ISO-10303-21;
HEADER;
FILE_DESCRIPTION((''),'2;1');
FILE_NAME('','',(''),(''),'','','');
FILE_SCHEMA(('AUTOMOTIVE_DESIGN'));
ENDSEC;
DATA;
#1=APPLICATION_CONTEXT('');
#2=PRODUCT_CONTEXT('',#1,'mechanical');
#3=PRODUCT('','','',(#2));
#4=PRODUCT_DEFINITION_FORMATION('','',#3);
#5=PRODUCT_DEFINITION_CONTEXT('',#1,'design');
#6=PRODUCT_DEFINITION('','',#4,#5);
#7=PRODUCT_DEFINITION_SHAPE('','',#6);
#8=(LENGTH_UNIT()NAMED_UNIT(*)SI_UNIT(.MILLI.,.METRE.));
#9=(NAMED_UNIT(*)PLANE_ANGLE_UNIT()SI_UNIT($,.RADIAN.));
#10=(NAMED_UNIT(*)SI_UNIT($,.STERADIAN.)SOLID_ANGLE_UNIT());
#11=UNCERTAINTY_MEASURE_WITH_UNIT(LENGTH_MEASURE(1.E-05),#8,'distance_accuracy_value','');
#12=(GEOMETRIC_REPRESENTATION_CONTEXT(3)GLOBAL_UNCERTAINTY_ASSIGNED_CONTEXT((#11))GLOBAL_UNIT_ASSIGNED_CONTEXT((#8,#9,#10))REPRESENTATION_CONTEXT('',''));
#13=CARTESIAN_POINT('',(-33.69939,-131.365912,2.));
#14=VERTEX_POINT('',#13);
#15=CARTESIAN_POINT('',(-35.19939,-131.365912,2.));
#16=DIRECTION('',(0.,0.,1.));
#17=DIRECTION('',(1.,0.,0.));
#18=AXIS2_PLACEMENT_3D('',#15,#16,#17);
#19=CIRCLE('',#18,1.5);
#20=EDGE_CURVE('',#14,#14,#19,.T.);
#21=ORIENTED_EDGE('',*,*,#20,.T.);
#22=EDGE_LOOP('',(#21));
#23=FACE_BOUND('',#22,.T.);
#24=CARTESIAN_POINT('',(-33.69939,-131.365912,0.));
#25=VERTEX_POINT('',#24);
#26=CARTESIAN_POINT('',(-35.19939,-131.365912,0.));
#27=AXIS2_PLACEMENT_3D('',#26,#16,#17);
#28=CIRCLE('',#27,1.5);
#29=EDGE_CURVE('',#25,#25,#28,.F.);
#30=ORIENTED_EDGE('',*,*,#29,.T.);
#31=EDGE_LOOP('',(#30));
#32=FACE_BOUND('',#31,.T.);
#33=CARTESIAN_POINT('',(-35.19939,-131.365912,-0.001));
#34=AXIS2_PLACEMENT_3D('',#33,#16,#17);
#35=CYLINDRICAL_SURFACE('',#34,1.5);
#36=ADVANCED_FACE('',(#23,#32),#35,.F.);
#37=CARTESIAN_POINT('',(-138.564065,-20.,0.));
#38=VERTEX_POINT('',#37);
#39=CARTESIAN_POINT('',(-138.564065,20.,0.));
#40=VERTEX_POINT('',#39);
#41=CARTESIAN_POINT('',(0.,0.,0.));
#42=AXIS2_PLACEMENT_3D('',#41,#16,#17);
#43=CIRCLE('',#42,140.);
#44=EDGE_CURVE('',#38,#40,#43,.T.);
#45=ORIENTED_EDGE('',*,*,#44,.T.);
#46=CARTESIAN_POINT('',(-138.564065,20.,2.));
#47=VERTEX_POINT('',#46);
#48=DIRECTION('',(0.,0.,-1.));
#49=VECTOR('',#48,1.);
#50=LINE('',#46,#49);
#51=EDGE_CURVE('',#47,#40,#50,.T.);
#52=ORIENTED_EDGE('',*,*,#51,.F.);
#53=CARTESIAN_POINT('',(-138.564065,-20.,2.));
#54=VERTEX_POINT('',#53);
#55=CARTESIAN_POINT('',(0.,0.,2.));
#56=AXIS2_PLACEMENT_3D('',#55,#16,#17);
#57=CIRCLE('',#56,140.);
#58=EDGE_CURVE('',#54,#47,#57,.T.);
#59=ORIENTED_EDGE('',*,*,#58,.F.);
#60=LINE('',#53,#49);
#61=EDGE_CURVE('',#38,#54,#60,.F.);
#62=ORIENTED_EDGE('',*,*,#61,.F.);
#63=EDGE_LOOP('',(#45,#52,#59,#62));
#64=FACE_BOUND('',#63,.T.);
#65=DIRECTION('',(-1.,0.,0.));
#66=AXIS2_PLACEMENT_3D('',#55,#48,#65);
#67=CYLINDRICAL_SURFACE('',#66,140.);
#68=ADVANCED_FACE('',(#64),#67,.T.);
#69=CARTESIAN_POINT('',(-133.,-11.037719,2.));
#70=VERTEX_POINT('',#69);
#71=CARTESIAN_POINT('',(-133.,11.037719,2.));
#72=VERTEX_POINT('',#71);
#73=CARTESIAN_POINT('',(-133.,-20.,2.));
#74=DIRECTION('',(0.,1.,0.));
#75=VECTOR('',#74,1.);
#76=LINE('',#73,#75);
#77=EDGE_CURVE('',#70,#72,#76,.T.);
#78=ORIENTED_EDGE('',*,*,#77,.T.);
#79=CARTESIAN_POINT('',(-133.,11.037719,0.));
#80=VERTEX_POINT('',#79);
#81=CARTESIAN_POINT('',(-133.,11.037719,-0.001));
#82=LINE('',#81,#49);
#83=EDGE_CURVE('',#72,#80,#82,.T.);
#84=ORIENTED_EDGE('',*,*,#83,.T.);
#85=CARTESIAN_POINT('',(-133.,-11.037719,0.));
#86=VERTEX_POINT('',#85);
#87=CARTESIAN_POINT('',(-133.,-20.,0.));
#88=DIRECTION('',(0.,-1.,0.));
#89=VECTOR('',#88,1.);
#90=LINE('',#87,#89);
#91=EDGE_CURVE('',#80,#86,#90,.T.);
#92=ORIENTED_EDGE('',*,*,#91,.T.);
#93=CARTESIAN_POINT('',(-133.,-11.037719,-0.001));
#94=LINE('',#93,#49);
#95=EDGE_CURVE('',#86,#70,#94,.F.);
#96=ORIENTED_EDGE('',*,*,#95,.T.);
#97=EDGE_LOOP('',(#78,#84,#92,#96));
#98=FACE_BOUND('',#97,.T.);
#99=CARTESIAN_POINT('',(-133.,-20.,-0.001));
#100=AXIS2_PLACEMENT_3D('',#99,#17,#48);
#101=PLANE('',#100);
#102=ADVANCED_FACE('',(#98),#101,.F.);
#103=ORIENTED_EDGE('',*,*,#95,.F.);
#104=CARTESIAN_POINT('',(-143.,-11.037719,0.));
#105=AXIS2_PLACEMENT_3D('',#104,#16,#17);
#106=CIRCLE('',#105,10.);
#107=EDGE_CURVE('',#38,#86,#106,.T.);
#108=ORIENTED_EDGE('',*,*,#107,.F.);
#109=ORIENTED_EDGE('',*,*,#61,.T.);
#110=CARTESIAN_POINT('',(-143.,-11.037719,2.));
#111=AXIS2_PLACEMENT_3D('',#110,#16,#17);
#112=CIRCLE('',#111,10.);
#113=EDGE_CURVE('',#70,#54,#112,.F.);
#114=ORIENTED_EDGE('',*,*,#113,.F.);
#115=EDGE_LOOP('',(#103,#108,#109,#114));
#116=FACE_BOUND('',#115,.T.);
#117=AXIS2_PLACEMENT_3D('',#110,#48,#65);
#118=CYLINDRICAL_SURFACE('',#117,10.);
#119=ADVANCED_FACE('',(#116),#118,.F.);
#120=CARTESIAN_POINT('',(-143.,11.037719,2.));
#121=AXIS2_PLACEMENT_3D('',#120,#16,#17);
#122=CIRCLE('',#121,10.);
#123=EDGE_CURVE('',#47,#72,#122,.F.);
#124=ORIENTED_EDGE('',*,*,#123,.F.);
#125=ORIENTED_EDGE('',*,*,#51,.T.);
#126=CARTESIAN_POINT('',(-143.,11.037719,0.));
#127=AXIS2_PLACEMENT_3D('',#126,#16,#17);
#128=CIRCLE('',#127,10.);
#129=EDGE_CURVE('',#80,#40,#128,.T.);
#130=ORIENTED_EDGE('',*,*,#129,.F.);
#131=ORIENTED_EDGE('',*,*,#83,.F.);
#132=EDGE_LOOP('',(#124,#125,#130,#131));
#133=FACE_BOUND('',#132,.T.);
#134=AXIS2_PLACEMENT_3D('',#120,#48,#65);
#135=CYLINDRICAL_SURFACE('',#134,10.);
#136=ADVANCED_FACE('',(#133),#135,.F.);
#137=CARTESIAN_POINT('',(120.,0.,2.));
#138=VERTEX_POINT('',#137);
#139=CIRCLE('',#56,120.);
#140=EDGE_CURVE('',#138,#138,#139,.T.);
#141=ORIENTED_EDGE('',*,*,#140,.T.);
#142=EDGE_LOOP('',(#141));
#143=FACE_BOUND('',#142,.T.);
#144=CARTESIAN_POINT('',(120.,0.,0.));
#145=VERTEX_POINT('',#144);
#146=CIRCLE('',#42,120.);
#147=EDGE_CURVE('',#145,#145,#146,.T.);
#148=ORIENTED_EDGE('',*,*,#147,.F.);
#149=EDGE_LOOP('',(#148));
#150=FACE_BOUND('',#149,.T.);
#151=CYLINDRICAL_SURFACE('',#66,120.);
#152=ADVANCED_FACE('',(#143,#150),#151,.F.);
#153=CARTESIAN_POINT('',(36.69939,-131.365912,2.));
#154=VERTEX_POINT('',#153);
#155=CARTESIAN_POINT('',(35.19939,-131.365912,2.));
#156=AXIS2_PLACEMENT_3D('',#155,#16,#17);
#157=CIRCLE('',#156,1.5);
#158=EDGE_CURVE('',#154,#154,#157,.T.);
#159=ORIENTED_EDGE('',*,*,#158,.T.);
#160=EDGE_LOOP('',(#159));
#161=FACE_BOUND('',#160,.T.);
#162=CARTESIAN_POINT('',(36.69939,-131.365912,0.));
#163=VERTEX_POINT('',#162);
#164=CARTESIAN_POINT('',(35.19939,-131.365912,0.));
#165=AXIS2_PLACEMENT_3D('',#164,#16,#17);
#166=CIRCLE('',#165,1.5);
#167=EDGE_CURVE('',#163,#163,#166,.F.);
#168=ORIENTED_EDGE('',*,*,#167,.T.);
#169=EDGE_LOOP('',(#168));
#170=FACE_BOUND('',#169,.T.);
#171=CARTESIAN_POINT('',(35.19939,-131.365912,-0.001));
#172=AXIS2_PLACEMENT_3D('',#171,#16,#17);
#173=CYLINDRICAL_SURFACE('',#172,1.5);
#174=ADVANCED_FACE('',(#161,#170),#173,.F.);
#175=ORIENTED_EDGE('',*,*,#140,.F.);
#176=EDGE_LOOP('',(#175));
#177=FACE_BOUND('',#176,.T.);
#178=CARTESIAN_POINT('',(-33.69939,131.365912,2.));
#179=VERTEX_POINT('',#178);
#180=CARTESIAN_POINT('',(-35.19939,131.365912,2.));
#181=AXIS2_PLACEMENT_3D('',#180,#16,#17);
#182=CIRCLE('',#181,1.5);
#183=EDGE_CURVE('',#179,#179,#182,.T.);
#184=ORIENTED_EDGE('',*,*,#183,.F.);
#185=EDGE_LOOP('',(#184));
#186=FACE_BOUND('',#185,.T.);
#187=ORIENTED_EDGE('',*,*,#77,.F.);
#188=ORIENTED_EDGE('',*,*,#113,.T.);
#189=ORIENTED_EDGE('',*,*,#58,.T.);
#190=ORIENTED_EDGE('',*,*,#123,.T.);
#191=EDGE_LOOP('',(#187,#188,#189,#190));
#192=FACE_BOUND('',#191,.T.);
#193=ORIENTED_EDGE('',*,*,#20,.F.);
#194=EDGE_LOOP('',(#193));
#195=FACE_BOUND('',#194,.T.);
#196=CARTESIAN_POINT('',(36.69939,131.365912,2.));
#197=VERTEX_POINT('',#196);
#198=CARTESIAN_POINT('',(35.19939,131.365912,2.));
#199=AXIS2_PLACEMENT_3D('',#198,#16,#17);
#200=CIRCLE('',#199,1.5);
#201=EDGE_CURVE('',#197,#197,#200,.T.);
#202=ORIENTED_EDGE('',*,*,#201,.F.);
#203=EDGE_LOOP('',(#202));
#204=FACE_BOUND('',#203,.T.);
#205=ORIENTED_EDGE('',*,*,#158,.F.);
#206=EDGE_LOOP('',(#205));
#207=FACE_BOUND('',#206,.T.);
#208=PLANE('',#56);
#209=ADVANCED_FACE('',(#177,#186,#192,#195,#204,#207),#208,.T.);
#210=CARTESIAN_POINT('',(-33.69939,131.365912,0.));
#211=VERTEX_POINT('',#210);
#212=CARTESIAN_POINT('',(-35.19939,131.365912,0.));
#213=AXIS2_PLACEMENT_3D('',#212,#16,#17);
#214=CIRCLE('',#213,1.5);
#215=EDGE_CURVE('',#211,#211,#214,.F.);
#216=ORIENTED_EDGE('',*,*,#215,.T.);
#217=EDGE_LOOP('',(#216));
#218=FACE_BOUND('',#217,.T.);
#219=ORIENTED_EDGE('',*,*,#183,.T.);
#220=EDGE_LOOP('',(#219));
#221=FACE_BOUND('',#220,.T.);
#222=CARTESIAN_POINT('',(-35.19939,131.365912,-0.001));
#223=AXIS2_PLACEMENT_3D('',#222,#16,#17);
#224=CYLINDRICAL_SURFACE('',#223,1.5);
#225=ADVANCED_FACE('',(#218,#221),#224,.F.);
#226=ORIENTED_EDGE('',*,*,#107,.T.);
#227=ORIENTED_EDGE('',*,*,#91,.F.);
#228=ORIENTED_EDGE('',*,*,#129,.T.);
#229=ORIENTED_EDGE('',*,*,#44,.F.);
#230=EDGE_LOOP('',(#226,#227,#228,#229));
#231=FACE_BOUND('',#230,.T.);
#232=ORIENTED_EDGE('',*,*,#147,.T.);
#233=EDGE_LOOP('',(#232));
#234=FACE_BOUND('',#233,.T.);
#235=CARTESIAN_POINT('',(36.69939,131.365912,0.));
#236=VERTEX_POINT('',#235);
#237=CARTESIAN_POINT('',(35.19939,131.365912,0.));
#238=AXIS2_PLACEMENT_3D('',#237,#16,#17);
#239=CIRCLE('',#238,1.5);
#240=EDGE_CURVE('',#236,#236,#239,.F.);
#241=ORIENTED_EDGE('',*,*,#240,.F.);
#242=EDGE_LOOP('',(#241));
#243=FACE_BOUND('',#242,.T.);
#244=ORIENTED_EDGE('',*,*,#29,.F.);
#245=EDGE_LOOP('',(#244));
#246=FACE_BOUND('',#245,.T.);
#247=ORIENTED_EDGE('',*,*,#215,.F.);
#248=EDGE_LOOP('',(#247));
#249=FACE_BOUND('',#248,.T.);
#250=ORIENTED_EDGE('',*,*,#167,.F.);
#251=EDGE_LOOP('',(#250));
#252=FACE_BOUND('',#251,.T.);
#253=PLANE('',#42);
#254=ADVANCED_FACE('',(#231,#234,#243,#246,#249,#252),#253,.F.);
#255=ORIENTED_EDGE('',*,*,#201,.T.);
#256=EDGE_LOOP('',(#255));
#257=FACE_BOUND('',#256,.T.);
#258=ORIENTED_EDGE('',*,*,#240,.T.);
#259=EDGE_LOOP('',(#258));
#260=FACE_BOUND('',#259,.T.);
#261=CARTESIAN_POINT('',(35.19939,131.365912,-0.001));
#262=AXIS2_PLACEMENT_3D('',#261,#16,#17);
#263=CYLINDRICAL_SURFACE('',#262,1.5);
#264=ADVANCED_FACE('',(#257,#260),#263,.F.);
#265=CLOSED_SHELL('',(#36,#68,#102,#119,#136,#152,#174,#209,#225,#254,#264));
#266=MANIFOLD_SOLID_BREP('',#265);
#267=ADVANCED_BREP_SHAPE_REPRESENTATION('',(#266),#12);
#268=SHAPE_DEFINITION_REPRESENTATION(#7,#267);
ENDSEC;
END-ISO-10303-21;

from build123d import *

# Parameters (mm, degrees)
ESQUISSE1_R             = 140
ESQUISSE1_R_2           = 120
BOSS_EXTRU_1_DEPTH      = 2
ENL_V_MAT_EXTRU_1_REACH = 200
ESQUISSE2_W             = 10
ESQUISSE2_H             = 40
ESQUISSE4_W             = 11.636908411
ESQUISSE4_H             = 60
BOSS_EXTRU_2_DEPTH      = 2
CONG_1_R                = 10
ENL_V_MAT_EXTRU_2_REACH = 200
ESQUISSE5_R             = 1.5


with BuildPart() as part:
    # Esquisse1 → Boss.-Extru.1 (new body)
    with BuildSketch(Plane.XY):
        Circle(ESQUISSE1_R)
        Circle(ESQUISSE1_R_2, mode=Mode.SUBTRACT)
    extrude(amount=BOSS_EXTRU_1_DEPTH)

    # Esquisse2 → Enlèv. mat.-Extru.1 (cut, up to next)
    with BuildSketch(Plane.XY.offset(2), mode=Mode.PRIVATE) as enl_v_mat_extru_1_sk1:
        with Locations((-138, 0)):
            Rectangle(ESQUISSE2_W, ESQUISSE2_H)
    enl_v_mat_extru_1_tool1 = extrude(enl_v_mat_extru_1_sk1.sketch, amount=-ENL_V_MAT_EXTRU_1_REACH, mode=Mode.PRIVATE) & part.part
    add(enl_v_mat_extru_1_tool1.solids().sort_by_distance((-138, 0, 2))[0], mode=Mode.SUBTRACT)

    # Esquisse4 → Boss.-Extru.2 (add)
    with BuildSketch(Plane.XY.offset(2)):
        with Locations((-127.181545795, 10)):
            Rectangle(ESQUISSE4_W, ESQUISSE4_H)
    extrude(amount=-BOSS_EXTRU_2_DEPTH)

    # Congé1
    # the kernel refuses this fillet: 10 mm, written as the material it adds along each edge
    with BuildSketch(Plane(origin=(-133, -20, 2), x_dir=(-1, 0, 0), z_dir=(0, 0, -1))) as cong_1_piece_1:
        with BuildLine():
            CenterArc((10, 8.962280802), CONG_1_R, 180, 63.666611113)
            Line((0, 8.962280802), (-0.2, 8.962280802))
            Line((-0.2, 8.962280802), (-0.2, 0))
            Line((-0.2, 0), (0, -0.2))
            ThreePointArc((0, -0.2), (2.782032303, -0.2), (5.475345898, -0.179245616))
            Line((5.475345898, -0.179245616), (5.564064606, 0))
        make_face()
    extrude(amount=2)
    with BuildSketch(Plane(origin=(-133, 20, 2), x_dir=(-1, 0, 0), z_dir=(0, 0, -1))) as cong_1_piece_2:
        with BuildLine():
            CenterArc((10, -8.962280802), CONG_1_R, 116.333388887, 63.666611113)
            Line((0, -8.962280802), (-0.2, -8.962280802))
            Line((-0.2, -8.962280802), (-0.2, 0))
            Line((-0.2, 0), (0, 0.2))
            ThreePointArc((0, 0.2), (2.782032303, 0.2), (5.475345898, 0.179245616))
            Line((5.475345898, 0.179245616), (5.564064606, 0))
        make_face()
    extrude(amount=2)

    # Esquisse5 → Enlèv. mat.-Extru.2 (cut, up to next)
    with BuildSketch(Plane.XY.offset(2), mode=Mode.PRIVATE) as enl_v_mat_extru_2_sk1:
        with Locations((-35.199390134, -131.365912375)):
            Circle(ESQUISSE5_R)
    enl_v_mat_extru_2_tool1 = extrude(enl_v_mat_extru_2_sk1.sketch, amount=-ENL_V_MAT_EXTRU_2_REACH, mode=Mode.PRIVATE) & part.part
    # Esquisse5 → Enlèv. mat.-Extru.2 (cut, up to next)
    with BuildSketch(Plane.XY.offset(2), mode=Mode.PRIVATE) as enl_v_mat_extru_2_sk2:
        with Locations((35.199390134, -131.365912375)):
            Circle(ESQUISSE5_R)
    enl_v_mat_extru_2_tool2 = extrude(enl_v_mat_extru_2_sk2.sketch, amount=-ENL_V_MAT_EXTRU_2_REACH, mode=Mode.PRIVATE) & part.part
    # Esquisse5 → Enlèv. mat.-Extru.2 (cut, up to next)
    with BuildSketch(Plane.XY.offset(2), mode=Mode.PRIVATE) as enl_v_mat_extru_2_sk3:
        with Locations((-35.199390134, 131.365912375)):
            Circle(ESQUISSE5_R)
    enl_v_mat_extru_2_tool3 = extrude(enl_v_mat_extru_2_sk3.sketch, amount=-ENL_V_MAT_EXTRU_2_REACH, mode=Mode.PRIVATE) & part.part
    # Esquisse5 → Enlèv. mat.-Extru.2 (cut, up to next)
    with BuildSketch(Plane.XY.offset(2), mode=Mode.PRIVATE) as enl_v_mat_extru_2_sk4:
        with Locations((35.199390134, 131.365912375)):
            Circle(ESQUISSE5_R)
    enl_v_mat_extru_2_tool4 = extrude(enl_v_mat_extru_2_sk4.sketch, amount=-ENL_V_MAT_EXTRU_2_REACH, mode=Mode.PRIVATE) & part.part
    add(enl_v_mat_extru_2_tool1.solids().sort_by_distance((-35.19939, -131.365912, 2))[0], mode=Mode.SUBTRACT)
    add(enl_v_mat_extru_2_tool2.solids().sort_by_distance((35.19939, -131.365912, 2))[0], mode=Mode.SUBTRACT)
    add(enl_v_mat_extru_2_tool3.solids().sort_by_distance((-35.19939, 131.365912, 2))[0], mode=Mode.SUBTRACT)
    add(enl_v_mat_extru_2_tool4.solids().sort_by_distance((35.19939, 131.365912, 2))[0], mode=Mode.SUBTRACT)


solid = part.part
